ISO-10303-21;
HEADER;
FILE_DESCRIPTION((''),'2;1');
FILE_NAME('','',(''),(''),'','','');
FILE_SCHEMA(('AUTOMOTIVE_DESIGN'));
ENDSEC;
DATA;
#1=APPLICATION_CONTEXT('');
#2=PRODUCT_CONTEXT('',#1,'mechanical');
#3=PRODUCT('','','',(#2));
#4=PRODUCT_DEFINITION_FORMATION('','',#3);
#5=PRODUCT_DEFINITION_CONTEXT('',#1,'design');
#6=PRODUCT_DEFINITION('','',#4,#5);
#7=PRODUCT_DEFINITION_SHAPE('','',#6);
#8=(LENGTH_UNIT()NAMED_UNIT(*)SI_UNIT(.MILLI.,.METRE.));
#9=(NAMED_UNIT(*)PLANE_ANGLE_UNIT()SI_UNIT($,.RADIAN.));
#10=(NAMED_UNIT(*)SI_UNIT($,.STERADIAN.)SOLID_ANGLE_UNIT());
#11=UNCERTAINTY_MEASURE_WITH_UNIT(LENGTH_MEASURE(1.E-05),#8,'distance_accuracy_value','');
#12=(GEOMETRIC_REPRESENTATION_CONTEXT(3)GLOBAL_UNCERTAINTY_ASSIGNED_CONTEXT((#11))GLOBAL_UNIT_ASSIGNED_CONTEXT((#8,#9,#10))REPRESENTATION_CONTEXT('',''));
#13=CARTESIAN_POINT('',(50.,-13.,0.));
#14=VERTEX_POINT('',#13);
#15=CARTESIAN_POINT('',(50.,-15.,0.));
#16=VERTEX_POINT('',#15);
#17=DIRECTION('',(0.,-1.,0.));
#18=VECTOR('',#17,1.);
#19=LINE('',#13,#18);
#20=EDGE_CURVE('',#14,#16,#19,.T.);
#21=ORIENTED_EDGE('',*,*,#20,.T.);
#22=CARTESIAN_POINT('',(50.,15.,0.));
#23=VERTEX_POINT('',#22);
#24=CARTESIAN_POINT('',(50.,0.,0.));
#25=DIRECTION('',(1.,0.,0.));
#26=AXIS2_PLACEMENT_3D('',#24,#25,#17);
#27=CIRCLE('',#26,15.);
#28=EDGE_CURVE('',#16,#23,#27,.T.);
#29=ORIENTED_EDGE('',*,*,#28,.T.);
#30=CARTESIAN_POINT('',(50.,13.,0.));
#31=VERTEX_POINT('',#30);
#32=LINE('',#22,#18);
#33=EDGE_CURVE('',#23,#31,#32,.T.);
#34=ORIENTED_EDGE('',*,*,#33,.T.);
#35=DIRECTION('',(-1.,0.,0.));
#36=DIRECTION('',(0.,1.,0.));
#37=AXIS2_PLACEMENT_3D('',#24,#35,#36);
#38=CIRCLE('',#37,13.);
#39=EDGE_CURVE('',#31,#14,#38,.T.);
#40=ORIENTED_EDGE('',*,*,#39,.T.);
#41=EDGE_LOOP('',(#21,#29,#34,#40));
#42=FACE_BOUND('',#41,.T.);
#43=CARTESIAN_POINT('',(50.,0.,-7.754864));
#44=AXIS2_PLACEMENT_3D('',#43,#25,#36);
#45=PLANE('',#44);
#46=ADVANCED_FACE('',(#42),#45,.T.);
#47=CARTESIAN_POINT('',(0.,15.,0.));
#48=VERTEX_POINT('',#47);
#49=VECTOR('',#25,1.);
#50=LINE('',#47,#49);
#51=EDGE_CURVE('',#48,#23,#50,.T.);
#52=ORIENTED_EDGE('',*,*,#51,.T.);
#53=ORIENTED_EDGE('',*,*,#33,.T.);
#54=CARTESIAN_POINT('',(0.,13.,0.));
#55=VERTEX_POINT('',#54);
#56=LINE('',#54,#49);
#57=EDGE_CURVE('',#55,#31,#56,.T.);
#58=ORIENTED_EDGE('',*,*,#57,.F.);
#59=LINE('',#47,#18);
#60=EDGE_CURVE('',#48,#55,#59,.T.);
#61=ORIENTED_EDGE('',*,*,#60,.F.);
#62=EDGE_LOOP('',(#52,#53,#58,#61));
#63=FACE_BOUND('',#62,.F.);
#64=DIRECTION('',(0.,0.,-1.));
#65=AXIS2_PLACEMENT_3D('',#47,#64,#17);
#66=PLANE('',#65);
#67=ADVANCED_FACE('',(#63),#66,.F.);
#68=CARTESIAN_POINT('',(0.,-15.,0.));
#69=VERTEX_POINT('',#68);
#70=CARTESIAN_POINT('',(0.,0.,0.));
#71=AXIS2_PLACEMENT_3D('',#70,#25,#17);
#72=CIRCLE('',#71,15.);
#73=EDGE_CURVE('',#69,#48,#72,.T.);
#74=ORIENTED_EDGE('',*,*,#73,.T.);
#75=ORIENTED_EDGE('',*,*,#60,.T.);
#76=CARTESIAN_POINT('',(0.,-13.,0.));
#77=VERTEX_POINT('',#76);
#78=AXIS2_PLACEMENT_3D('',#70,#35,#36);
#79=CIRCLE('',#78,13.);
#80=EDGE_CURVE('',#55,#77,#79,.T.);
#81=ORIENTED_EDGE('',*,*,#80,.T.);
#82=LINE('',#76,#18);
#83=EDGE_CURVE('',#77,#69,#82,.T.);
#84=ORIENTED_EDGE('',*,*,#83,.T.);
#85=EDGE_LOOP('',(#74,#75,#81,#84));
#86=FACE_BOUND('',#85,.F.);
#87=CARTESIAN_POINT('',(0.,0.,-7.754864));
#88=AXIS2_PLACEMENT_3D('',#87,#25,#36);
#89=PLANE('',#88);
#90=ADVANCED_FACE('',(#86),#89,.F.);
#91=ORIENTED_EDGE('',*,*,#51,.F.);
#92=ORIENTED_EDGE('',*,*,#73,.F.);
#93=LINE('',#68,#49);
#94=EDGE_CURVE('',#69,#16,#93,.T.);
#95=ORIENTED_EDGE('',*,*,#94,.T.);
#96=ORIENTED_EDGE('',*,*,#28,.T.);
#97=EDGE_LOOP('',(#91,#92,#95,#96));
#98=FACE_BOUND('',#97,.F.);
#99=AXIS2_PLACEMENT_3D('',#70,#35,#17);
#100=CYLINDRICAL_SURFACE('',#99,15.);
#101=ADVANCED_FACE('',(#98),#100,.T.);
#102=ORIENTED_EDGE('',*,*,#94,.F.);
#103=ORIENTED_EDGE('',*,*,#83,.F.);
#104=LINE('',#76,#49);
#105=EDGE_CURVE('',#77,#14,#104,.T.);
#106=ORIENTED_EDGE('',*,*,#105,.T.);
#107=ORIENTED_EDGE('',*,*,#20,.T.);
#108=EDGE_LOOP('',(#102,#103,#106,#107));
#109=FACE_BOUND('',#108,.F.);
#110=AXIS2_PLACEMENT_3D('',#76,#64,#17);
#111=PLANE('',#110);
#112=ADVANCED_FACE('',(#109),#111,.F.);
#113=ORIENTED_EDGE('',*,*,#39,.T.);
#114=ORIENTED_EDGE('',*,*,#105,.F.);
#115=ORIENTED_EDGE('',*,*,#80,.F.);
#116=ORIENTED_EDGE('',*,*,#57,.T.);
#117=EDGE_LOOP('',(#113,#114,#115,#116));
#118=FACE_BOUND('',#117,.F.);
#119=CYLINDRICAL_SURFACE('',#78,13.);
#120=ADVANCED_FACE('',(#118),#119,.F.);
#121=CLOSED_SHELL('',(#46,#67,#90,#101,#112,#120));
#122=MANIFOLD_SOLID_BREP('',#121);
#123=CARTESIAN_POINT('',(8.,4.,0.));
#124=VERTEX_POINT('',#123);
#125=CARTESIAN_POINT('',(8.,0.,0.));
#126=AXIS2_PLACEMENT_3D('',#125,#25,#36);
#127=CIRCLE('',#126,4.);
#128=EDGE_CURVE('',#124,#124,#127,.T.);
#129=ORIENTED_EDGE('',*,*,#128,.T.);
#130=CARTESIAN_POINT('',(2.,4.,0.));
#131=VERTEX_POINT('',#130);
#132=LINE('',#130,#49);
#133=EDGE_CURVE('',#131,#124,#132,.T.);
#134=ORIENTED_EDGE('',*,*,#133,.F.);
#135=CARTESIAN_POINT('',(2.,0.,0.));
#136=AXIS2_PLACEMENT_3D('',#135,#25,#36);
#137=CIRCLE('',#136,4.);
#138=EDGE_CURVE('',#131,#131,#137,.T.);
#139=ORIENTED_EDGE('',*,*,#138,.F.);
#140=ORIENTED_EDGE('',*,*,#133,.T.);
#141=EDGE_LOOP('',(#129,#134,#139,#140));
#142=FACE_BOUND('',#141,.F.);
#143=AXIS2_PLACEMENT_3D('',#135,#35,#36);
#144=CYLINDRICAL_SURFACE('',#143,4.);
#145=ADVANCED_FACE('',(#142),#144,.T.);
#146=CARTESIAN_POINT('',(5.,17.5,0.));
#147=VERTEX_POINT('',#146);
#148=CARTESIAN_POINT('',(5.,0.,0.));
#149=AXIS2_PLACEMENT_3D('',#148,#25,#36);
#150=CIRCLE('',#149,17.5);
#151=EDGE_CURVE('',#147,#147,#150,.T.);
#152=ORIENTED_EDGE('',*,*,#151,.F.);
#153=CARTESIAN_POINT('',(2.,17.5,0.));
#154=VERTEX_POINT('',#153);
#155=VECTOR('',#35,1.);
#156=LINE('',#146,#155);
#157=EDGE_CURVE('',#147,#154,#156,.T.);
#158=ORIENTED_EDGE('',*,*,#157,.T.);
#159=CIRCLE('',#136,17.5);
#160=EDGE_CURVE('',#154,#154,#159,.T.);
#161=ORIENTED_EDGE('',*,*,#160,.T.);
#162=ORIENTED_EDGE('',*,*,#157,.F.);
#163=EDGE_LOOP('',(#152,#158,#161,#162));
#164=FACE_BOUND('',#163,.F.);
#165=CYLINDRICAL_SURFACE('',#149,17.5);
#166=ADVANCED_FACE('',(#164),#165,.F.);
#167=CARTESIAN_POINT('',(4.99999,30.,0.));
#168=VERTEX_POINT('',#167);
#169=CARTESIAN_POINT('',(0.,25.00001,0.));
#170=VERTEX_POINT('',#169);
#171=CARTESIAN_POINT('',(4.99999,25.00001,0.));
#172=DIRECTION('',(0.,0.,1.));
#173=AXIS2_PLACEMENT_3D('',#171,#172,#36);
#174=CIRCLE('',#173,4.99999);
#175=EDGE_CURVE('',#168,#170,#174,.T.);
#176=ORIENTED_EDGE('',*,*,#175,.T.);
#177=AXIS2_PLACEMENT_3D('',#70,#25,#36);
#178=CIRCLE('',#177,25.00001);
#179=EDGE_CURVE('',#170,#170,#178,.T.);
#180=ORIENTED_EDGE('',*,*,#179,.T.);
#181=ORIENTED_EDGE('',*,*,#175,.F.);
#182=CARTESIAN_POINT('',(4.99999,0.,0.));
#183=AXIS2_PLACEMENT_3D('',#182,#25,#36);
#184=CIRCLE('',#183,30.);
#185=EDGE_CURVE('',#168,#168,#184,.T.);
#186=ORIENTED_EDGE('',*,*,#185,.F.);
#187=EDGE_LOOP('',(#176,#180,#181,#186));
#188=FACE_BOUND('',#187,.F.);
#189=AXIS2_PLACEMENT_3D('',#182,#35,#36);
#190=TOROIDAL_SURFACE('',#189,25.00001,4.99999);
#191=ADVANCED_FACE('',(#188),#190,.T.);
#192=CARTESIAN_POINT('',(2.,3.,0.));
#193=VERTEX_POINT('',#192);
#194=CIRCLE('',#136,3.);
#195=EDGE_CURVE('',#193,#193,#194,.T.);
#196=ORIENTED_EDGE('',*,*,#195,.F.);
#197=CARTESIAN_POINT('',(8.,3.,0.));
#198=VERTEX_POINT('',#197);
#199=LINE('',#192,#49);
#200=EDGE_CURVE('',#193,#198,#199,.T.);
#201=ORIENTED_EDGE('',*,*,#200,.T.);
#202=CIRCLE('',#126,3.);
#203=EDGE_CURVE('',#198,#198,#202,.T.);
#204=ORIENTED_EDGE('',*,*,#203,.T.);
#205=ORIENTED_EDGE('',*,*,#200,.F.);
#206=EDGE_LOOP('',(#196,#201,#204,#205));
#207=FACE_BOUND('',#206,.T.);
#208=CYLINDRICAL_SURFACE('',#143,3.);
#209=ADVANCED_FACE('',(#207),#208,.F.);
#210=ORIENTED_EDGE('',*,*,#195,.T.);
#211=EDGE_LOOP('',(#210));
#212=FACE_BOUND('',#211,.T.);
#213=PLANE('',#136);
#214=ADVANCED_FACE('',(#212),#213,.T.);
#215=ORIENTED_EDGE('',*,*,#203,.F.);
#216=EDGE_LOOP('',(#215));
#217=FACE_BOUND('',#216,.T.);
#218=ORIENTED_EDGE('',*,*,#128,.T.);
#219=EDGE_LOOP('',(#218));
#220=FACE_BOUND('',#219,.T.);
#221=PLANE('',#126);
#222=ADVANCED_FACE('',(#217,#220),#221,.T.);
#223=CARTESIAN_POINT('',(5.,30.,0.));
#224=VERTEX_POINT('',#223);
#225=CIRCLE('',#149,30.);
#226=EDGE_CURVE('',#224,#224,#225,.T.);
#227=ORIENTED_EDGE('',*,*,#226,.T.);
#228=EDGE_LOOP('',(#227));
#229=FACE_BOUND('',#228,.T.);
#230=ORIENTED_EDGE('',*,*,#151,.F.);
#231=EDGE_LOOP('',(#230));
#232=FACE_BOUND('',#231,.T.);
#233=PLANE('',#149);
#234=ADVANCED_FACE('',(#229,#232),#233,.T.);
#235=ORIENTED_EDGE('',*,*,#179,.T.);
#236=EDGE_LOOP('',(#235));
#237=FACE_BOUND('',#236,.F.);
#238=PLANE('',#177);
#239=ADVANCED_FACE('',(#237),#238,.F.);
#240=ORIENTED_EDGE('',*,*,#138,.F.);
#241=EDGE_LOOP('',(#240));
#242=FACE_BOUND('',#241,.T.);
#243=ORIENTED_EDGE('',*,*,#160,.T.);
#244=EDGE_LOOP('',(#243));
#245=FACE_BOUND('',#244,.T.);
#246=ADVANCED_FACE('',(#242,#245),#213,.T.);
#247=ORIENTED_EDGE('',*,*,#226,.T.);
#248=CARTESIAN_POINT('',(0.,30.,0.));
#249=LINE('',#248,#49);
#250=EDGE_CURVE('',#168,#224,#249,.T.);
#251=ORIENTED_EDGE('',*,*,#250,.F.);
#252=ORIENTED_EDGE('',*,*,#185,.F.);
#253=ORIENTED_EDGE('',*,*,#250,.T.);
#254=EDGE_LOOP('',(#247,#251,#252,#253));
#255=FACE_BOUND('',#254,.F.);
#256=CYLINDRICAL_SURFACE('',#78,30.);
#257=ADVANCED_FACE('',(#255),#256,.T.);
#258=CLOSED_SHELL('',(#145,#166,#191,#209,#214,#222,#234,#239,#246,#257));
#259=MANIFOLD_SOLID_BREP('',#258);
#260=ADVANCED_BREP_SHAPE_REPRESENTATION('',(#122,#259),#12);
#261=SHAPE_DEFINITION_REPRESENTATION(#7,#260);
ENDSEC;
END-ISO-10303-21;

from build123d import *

# Parameters (mm, degrees)
F0_R     = 30
F1_DEPTH = 5
F2_R     = 4.99999
F3_R     = 17.5
F4_DEPTH = 3
F5_R     = 4
F5_R_2   = 3
F6_DEPTH = 6
F8_DEPTH = 50


# Not quite as in the source:
# - a fillet or chamfer is up to 0.001 mm smaller than in the source, because OpenCascade refuses the exact size


with BuildPart() as f1:
    # F0 (on Right) → F1 (new body)
    with BuildSketch(Plane.YZ):
        Circle(F0_R)
    extrude(amount=F1_DEPTH)

    # F2 (radius 5 in the source; OpenCascade refuses exactly that, so slightly less here)
    f2_edges = [f1.edges().sort_by_distance(p)[0] for p in [
        (0, -30, 0),
    ]]
    fillet(f2_edges, radius=F2_R)

    # F3 (on face) → F4 (cut)
    with BuildSketch(Plane.YZ.offset(5)):
        Circle(F3_R)
    extrude(amount=-F4_DEPTH, mode=Mode.SUBTRACT)

    # F5 (on face) → F6 (join)
    with BuildSketch(Plane.YZ.offset(2)):
        Circle(F5_R)
        Circle(F5_R_2, mode=Mode.SUBTRACT)
    extrude(amount=F6_DEPTH)


with BuildPart() as f8:
    # F7 (on Right) → F8 (new body)
    with BuildSketch(Plane.YZ):
        with BuildLine():
            Line((-13, 0), (-15, 0))
            ThreePointArc((-15, 0), (0, -15), (15, 0))
            Line((15, 0), (13, 0))
            ThreePointArc((13, 0), (0, -13), (-13, 0))
        make_face()
    extrude(amount=F8_DEPTH)


solid = Compound([f1.part, f8.part])
